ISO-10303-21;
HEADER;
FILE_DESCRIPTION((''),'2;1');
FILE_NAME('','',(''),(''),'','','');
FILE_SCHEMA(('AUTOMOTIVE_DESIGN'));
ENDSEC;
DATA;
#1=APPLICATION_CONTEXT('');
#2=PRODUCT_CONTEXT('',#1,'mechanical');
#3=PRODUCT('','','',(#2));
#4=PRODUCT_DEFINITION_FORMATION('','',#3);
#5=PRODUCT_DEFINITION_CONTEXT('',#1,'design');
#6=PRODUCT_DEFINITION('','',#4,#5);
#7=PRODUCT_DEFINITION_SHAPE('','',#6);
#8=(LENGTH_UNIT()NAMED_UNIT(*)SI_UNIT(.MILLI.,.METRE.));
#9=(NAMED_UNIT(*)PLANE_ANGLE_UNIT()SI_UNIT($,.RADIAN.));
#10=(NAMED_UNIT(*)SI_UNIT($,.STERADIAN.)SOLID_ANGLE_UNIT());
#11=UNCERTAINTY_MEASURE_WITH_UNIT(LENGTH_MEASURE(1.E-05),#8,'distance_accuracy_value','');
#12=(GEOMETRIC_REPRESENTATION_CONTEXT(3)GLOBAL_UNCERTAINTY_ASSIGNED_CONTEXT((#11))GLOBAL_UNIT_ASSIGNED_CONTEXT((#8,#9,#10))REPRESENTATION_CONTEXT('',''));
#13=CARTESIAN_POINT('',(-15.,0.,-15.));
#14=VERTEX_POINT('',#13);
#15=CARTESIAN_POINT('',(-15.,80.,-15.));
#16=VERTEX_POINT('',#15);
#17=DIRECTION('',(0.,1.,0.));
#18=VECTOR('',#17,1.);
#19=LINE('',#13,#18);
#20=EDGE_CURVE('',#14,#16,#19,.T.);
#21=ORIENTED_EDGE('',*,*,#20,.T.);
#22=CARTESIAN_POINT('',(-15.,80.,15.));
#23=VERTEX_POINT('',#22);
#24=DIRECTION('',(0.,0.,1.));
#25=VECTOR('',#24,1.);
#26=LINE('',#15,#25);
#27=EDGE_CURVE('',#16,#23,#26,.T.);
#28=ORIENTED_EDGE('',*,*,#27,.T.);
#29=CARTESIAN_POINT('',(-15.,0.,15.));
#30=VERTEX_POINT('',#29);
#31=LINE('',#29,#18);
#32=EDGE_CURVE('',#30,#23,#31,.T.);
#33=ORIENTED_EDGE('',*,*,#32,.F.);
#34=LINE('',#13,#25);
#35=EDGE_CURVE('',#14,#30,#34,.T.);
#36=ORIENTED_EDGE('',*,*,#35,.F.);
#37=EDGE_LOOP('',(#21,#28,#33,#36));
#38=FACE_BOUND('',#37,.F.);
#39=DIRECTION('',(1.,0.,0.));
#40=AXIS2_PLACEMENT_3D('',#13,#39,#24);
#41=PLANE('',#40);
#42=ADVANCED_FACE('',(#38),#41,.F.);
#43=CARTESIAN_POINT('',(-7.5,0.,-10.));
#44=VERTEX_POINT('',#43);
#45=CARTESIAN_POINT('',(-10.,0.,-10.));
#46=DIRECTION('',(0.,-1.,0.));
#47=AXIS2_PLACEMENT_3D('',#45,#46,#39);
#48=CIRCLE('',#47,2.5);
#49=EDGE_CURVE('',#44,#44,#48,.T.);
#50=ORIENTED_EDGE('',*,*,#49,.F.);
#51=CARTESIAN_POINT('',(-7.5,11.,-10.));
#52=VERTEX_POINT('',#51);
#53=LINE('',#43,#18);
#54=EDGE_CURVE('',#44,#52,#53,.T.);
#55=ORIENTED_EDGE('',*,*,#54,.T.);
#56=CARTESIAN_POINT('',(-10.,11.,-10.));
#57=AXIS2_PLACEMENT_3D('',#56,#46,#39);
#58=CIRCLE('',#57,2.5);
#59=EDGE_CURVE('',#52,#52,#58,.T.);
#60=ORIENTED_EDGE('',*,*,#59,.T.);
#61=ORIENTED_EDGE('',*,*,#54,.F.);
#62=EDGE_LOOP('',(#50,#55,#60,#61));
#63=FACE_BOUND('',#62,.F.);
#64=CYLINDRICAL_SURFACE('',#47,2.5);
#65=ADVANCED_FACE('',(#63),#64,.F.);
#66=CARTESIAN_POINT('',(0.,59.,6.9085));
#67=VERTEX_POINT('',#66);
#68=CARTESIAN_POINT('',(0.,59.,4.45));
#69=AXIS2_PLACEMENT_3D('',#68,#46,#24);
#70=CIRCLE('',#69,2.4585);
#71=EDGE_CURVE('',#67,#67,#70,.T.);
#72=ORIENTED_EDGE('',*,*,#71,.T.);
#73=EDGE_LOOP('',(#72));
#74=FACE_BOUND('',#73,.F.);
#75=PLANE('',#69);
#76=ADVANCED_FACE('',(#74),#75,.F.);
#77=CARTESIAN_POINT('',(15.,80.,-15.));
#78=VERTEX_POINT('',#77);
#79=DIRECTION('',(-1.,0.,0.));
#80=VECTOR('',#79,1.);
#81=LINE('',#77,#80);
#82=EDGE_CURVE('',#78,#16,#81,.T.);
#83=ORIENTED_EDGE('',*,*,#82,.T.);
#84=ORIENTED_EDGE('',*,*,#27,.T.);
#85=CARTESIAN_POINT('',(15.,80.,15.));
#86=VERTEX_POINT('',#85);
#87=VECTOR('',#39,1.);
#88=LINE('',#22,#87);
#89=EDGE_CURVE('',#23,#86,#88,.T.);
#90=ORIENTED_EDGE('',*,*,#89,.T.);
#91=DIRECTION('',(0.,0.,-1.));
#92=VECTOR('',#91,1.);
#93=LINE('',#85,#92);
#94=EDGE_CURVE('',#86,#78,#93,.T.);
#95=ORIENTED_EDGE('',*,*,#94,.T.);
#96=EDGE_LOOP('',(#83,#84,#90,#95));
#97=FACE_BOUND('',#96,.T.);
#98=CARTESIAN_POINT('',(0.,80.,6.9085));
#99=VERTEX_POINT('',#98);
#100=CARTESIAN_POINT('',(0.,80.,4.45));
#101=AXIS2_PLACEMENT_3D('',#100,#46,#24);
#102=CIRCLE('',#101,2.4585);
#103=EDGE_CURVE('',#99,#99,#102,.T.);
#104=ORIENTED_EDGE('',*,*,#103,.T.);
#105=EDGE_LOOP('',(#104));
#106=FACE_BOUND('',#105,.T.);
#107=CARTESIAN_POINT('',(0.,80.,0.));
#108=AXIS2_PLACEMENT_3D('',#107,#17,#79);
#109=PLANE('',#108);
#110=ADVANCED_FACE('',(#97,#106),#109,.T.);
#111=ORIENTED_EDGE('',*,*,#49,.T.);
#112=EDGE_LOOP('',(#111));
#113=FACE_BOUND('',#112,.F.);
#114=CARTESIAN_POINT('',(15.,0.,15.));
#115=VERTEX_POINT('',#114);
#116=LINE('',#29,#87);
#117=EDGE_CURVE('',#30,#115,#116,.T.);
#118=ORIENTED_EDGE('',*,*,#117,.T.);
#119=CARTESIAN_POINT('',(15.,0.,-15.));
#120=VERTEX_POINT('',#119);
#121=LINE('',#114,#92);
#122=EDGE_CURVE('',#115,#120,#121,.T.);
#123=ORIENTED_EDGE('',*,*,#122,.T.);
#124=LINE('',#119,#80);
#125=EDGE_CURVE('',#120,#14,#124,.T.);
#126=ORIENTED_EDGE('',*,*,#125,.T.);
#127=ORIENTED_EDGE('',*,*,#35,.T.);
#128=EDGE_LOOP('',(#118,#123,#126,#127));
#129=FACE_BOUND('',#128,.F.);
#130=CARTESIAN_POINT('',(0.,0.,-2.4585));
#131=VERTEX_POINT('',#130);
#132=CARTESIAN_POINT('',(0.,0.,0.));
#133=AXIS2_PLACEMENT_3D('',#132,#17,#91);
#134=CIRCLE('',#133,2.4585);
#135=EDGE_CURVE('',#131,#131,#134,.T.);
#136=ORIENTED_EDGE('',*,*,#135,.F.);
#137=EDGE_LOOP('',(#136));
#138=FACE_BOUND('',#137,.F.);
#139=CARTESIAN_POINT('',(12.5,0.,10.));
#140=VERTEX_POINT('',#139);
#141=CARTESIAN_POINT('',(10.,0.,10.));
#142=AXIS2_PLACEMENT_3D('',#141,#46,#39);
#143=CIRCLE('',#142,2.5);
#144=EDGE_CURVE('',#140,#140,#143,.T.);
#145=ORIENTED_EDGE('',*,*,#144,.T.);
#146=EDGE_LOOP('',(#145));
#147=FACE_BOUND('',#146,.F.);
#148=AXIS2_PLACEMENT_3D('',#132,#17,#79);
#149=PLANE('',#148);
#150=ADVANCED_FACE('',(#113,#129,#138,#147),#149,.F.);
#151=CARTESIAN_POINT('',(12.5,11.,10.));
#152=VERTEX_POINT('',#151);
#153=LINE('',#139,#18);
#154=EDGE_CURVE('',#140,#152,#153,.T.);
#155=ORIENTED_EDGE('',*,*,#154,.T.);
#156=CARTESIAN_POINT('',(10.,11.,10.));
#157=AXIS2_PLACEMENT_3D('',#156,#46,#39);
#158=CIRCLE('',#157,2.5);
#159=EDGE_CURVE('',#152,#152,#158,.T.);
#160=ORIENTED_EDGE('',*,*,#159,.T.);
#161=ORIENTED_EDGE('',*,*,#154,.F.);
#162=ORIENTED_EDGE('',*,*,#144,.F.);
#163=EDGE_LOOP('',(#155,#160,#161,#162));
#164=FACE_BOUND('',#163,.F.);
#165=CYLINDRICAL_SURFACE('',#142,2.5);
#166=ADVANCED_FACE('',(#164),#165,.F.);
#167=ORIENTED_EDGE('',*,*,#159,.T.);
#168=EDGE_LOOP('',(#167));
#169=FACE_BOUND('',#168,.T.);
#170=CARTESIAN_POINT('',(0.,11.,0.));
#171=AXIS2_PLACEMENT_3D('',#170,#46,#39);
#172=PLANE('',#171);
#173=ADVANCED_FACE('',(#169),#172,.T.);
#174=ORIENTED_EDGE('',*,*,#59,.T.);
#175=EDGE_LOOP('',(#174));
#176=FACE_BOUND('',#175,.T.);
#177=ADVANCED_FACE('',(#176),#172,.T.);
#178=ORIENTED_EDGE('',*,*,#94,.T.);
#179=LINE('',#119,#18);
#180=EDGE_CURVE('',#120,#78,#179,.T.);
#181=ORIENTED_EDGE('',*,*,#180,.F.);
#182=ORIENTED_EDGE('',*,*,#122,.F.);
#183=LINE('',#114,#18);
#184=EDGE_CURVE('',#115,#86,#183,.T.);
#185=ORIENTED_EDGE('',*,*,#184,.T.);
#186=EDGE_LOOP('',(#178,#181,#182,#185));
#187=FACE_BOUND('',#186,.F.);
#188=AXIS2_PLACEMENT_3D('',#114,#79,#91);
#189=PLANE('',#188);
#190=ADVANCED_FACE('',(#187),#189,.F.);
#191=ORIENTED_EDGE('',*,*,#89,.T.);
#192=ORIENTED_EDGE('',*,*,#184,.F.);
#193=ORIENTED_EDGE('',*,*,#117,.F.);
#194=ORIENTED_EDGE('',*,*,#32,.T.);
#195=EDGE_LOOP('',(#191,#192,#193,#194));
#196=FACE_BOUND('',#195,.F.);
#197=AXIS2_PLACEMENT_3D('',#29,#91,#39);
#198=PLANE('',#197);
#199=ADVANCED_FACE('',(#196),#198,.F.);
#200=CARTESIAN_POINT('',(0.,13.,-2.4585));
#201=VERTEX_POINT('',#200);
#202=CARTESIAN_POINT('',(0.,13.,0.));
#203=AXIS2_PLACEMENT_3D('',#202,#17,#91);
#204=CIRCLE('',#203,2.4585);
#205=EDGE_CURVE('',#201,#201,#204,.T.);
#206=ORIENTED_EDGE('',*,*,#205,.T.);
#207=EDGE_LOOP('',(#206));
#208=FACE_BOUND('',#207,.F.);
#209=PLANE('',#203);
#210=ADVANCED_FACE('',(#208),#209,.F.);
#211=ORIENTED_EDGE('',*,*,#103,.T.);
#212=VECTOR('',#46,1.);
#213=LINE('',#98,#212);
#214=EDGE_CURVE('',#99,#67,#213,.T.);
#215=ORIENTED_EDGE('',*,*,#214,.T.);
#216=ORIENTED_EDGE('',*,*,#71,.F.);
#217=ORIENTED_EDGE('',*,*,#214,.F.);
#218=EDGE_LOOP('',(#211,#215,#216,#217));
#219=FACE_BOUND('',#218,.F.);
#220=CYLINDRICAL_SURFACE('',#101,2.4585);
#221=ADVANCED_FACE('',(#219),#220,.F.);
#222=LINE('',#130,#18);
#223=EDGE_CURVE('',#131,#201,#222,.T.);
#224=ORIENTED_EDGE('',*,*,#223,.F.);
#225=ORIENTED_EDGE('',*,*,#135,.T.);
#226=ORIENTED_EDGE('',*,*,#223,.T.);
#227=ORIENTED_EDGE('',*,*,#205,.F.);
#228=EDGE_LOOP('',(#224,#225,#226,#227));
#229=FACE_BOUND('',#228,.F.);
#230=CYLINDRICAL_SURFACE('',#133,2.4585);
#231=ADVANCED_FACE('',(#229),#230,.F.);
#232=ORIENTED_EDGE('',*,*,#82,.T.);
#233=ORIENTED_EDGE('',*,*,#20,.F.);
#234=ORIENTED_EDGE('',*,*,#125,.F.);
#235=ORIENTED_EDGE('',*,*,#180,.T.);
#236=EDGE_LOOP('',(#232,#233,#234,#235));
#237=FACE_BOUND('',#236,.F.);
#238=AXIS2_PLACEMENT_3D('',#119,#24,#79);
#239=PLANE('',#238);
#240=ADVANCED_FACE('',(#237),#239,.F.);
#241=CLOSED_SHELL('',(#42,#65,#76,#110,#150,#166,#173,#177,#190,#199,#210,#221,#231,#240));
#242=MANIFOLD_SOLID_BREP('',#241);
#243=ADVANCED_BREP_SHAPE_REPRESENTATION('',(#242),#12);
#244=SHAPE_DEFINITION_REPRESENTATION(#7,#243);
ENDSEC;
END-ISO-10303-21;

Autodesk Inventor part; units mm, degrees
ref_plane "YZ Plane" through (0, 0, 0) normal (1, 0, 0) x (0, 1, 0)
ref_plane "XZ Plane" through (0, 0, 0) normal (0, 1, 0) x (-1, 0, 0)
ref_plane "XY Plane" through (0, 0, 0) normal (0, 0, 1) x (1, 0, 0)
sketch "Sketch1" plane through (0, 0, 0) normal (0, 1, 0) x (-1, 0, 0)
  line L0 (15, 15) -> (-15, 15)
  line L1 (-15, 15) -> (-15, -15)
  line L2 (-15, -15) -> (15, -15)
  line L3 (15, -15) -> (15, 15)
  line L4 (15, 15) -> (-15, -15) construction
  line L5 (-15, 15) -> (15, -15) construction
  point P0 (0, 0)
  dimension "d0" = 30
  dimension "d1" = 30
extrude "Extrusion1" add sketch "Sketch1" along normal blind 80
sketch "Sketch2" plane through (0, 80, 0) normal (0, 1, 0) x (1, 0, 0)
  line L0 (-15, -15) -> (15, -15) construction
  line L1 (0, -15) -> (0, 3.55) construction
  line L2 (0, 3.55) -> (0, -4.45) construction
  point P0 (0, 0)
  dimension "d4" = 18.55
  dimension "d5" = 8
hole "Hole1" at (0, 80, 4.45) direction (0, -1, 0) diameter 4.917 depth 21 thread size "M6x1" class "6H" standard "ISO Metric profile"
sketch "Sketch3" plane through (0, 0, 0) normal (0, -1, 0) x (1, 0, 0)
  line L0 (-10, -10) -> (10, -10) construction
  line L1 (10, -10) -> (10, 10) construction
  line L2 (10, 10) -> (-10, 10) construction
  line L3 (-10, 10) -> (-10, -10) construction
  line L4 (-10, -10) -> (10, 10) construction
  line L5 (10, -10) -> (-10, 10) construction
  circle A0 centre (10, 10) radius 2.5
  circle A1 centre (-10, -10) radius 2.5
  point P0 (0, 0)
  dimension "d20" = 20
  dimension "d21" = 20
  dimension "d22" = 5
  dimension "d23" = 5
hole "Hole2" at (0, 0, 0) direction (0, 1, 0) diameter 4.917 depth 13 thread size "M6x1" class "6H" standard "ISO Metric profile"
extrude "Extrusion2" cut sketch "Sketch3" against normal blind 11
sketch "Sketch7" plane through (0, 0, 0) normal (0, -1, 0) x (1, 0, 0)
  point P0 (0, 0)
properties part number "TallTower"
